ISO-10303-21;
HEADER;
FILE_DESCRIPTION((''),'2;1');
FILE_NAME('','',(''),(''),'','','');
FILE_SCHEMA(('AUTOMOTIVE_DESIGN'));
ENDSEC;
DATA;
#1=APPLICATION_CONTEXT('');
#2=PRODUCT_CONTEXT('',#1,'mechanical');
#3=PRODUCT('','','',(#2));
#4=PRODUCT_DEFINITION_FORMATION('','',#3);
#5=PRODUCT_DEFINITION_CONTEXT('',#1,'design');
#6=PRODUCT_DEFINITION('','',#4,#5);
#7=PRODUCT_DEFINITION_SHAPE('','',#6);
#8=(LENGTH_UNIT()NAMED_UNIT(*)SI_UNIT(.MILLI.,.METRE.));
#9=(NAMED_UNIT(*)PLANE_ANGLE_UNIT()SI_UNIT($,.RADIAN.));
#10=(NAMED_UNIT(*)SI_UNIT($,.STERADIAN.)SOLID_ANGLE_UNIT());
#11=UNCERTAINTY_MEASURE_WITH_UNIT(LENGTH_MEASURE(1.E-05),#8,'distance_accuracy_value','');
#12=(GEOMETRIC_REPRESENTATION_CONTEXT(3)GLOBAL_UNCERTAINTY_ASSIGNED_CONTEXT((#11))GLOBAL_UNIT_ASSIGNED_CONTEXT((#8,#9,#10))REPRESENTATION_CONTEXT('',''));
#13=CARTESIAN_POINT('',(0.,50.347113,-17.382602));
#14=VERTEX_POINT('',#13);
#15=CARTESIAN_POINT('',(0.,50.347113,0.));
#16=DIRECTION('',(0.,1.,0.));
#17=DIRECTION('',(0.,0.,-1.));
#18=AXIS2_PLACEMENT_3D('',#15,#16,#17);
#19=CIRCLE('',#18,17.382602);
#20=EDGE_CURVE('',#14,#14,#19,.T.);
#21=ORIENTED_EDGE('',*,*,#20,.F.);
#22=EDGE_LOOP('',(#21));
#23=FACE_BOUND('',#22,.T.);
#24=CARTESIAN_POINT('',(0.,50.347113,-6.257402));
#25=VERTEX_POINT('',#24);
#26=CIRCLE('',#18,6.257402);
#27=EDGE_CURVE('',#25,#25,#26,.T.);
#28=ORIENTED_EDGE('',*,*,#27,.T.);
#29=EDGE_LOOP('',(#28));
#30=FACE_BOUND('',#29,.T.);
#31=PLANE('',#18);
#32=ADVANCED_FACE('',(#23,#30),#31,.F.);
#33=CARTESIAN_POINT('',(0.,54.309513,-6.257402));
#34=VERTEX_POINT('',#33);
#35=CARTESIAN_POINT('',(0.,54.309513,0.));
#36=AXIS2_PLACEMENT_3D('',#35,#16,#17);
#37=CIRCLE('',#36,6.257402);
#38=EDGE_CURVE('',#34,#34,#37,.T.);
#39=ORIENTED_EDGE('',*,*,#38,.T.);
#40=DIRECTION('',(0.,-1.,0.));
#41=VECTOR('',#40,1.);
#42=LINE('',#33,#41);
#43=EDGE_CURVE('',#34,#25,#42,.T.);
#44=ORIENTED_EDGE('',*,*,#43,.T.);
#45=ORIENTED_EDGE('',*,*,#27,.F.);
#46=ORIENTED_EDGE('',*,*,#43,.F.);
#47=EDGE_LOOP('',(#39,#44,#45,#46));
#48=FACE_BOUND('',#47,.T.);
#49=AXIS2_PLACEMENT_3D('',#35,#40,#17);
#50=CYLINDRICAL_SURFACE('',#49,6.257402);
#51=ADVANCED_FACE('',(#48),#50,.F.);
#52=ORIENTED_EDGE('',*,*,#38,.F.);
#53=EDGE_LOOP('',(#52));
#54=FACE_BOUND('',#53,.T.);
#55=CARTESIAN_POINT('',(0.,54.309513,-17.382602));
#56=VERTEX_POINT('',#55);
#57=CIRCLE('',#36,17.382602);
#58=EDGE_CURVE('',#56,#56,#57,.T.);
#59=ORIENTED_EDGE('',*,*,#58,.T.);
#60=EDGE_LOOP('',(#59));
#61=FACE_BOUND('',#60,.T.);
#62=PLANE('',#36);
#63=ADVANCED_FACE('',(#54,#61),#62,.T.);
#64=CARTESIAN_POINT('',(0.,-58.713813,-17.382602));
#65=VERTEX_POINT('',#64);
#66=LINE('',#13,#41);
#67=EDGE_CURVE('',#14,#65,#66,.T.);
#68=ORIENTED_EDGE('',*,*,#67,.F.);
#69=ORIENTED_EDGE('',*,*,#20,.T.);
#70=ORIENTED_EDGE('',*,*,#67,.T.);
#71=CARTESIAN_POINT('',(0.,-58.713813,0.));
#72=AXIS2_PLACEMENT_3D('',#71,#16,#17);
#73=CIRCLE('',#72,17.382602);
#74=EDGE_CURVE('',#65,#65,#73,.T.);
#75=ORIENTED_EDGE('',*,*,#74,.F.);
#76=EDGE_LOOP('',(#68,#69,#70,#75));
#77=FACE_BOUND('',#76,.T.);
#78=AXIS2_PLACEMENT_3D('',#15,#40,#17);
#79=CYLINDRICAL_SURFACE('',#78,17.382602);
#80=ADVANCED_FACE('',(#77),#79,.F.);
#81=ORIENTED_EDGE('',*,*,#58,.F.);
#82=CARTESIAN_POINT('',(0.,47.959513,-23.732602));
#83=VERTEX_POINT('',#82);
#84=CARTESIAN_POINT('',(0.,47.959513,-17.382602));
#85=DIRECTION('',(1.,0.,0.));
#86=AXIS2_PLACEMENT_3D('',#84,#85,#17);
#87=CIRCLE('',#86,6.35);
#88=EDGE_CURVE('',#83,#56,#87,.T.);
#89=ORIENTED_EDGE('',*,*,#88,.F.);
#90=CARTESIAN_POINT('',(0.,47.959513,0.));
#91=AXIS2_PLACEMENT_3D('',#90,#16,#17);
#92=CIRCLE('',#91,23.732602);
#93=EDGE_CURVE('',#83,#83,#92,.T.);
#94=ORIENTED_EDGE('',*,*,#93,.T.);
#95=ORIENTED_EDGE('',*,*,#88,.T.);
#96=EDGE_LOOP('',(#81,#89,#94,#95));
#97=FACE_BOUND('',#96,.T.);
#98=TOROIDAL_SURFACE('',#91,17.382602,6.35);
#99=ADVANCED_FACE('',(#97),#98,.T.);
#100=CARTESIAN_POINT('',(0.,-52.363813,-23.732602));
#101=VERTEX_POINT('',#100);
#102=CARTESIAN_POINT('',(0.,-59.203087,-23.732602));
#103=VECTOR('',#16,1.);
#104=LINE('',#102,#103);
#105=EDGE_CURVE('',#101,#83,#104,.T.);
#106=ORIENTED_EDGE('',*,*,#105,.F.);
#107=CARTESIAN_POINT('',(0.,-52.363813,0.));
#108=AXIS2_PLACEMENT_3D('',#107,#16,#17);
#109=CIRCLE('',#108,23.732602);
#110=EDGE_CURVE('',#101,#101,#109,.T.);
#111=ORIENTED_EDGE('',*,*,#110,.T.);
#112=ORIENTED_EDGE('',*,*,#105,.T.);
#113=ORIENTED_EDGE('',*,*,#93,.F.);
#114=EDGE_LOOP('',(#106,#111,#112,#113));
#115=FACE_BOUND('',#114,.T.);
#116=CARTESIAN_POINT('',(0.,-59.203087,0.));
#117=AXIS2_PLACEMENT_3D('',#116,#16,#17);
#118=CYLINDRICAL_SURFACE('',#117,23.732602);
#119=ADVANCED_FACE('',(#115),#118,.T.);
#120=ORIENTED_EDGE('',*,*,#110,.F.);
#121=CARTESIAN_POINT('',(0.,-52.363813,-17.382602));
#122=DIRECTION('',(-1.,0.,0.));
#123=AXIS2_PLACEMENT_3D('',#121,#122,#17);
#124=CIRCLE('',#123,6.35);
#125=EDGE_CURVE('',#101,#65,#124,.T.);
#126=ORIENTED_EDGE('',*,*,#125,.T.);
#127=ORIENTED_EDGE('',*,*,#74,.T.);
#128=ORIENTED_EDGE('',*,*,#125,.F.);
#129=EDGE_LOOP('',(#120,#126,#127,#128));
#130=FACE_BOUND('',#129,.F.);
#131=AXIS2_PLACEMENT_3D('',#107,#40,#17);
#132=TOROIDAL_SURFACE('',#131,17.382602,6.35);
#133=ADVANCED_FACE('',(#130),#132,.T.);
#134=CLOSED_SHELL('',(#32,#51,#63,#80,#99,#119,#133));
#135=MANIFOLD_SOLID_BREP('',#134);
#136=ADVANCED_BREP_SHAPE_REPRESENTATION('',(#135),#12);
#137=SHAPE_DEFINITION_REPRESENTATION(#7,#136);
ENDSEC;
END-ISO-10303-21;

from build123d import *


# Not quite as in the source:
# - a fillet or chamfer that OpenCascade refuses, or shapes differently, is made with other operations: its cross-section is extruded or revolved along the edge and cut away or added


with BuildPart() as f1:
    # F0 (on Right) → F1 (revolve)
    with BuildSketch(Plane.YZ):
        Polygon((-59.2030874318, -23.7326024727), (54.3095125682, -23.7326024727), (54.3095125682, -6.2574024727), (50.3471125682, -6.2574024727), (50.3471125682, -17.3826024727), (-58.7138126601, -17.3826024727), align=None)
    revolve(axis=Axis((0, 27.4040363729, 0), (0, 1, 0)))

    # F2: fillet of radius 6.35 on 2 edges, made by hand

    # F2_s1 → F2_t2 (revolve, cut)
    with BuildSketch(Plane.YZ):
        with BuildLine():
            ThreePointArc((-52.3638126601, -23.7326024727), (-56.8539407206, -21.8727305333), (-58.7138126601, -17.3826024727))
            Line((-58.7138126601, -17.3826024727), (-58.8408126601, -17.3826024727))
            ThreePointArc((-58.8408126601, -17.3826024727), (-59.0850747245, -20.5478458962), (-59.3297121104, -23.7228458962))
            Line((-59.3297121104, -23.7228458962), (-59.2030874318, -23.8596024727))
            Line((-59.2030874318, -23.8596024727), (-52.3638126601, -23.8596024727))
            Line((-52.3638126601, -23.8596024727), (-52.3638126601, -23.7326024727))
        make_face()
    revolve(axis=Axis((0, -59.2030874318, 0), (0, 1, 0)), mode=Mode.SUBTRACT)

    # F2_s3 → F2_t4 (revolve, cut)
    with BuildSketch(Plane.YZ):
        with BuildLine():
            ThreePointArc((47.9595125682, -23.7326024727), (52.4496406287, -21.8727305333), (54.3095125682, -17.3826024727))
            Line((54.3095125682, -17.3826024727), (54.4365125682, -17.3826024727))
            Line((54.4365125682, -17.3826024727), (54.4365125682, -23.8596024727))
            Line((54.4365125682, -23.8596024727), (47.9595125682, -23.8596024727))
            Line((47.9595125682, -23.8596024727), (47.9595125682, -23.7326024727))
        make_face()
    revolve(axis=Axis((0, 54.3095125682, 0), (0, 1, 0)), mode=Mode.SUBTRACT)


solid = f1.part
